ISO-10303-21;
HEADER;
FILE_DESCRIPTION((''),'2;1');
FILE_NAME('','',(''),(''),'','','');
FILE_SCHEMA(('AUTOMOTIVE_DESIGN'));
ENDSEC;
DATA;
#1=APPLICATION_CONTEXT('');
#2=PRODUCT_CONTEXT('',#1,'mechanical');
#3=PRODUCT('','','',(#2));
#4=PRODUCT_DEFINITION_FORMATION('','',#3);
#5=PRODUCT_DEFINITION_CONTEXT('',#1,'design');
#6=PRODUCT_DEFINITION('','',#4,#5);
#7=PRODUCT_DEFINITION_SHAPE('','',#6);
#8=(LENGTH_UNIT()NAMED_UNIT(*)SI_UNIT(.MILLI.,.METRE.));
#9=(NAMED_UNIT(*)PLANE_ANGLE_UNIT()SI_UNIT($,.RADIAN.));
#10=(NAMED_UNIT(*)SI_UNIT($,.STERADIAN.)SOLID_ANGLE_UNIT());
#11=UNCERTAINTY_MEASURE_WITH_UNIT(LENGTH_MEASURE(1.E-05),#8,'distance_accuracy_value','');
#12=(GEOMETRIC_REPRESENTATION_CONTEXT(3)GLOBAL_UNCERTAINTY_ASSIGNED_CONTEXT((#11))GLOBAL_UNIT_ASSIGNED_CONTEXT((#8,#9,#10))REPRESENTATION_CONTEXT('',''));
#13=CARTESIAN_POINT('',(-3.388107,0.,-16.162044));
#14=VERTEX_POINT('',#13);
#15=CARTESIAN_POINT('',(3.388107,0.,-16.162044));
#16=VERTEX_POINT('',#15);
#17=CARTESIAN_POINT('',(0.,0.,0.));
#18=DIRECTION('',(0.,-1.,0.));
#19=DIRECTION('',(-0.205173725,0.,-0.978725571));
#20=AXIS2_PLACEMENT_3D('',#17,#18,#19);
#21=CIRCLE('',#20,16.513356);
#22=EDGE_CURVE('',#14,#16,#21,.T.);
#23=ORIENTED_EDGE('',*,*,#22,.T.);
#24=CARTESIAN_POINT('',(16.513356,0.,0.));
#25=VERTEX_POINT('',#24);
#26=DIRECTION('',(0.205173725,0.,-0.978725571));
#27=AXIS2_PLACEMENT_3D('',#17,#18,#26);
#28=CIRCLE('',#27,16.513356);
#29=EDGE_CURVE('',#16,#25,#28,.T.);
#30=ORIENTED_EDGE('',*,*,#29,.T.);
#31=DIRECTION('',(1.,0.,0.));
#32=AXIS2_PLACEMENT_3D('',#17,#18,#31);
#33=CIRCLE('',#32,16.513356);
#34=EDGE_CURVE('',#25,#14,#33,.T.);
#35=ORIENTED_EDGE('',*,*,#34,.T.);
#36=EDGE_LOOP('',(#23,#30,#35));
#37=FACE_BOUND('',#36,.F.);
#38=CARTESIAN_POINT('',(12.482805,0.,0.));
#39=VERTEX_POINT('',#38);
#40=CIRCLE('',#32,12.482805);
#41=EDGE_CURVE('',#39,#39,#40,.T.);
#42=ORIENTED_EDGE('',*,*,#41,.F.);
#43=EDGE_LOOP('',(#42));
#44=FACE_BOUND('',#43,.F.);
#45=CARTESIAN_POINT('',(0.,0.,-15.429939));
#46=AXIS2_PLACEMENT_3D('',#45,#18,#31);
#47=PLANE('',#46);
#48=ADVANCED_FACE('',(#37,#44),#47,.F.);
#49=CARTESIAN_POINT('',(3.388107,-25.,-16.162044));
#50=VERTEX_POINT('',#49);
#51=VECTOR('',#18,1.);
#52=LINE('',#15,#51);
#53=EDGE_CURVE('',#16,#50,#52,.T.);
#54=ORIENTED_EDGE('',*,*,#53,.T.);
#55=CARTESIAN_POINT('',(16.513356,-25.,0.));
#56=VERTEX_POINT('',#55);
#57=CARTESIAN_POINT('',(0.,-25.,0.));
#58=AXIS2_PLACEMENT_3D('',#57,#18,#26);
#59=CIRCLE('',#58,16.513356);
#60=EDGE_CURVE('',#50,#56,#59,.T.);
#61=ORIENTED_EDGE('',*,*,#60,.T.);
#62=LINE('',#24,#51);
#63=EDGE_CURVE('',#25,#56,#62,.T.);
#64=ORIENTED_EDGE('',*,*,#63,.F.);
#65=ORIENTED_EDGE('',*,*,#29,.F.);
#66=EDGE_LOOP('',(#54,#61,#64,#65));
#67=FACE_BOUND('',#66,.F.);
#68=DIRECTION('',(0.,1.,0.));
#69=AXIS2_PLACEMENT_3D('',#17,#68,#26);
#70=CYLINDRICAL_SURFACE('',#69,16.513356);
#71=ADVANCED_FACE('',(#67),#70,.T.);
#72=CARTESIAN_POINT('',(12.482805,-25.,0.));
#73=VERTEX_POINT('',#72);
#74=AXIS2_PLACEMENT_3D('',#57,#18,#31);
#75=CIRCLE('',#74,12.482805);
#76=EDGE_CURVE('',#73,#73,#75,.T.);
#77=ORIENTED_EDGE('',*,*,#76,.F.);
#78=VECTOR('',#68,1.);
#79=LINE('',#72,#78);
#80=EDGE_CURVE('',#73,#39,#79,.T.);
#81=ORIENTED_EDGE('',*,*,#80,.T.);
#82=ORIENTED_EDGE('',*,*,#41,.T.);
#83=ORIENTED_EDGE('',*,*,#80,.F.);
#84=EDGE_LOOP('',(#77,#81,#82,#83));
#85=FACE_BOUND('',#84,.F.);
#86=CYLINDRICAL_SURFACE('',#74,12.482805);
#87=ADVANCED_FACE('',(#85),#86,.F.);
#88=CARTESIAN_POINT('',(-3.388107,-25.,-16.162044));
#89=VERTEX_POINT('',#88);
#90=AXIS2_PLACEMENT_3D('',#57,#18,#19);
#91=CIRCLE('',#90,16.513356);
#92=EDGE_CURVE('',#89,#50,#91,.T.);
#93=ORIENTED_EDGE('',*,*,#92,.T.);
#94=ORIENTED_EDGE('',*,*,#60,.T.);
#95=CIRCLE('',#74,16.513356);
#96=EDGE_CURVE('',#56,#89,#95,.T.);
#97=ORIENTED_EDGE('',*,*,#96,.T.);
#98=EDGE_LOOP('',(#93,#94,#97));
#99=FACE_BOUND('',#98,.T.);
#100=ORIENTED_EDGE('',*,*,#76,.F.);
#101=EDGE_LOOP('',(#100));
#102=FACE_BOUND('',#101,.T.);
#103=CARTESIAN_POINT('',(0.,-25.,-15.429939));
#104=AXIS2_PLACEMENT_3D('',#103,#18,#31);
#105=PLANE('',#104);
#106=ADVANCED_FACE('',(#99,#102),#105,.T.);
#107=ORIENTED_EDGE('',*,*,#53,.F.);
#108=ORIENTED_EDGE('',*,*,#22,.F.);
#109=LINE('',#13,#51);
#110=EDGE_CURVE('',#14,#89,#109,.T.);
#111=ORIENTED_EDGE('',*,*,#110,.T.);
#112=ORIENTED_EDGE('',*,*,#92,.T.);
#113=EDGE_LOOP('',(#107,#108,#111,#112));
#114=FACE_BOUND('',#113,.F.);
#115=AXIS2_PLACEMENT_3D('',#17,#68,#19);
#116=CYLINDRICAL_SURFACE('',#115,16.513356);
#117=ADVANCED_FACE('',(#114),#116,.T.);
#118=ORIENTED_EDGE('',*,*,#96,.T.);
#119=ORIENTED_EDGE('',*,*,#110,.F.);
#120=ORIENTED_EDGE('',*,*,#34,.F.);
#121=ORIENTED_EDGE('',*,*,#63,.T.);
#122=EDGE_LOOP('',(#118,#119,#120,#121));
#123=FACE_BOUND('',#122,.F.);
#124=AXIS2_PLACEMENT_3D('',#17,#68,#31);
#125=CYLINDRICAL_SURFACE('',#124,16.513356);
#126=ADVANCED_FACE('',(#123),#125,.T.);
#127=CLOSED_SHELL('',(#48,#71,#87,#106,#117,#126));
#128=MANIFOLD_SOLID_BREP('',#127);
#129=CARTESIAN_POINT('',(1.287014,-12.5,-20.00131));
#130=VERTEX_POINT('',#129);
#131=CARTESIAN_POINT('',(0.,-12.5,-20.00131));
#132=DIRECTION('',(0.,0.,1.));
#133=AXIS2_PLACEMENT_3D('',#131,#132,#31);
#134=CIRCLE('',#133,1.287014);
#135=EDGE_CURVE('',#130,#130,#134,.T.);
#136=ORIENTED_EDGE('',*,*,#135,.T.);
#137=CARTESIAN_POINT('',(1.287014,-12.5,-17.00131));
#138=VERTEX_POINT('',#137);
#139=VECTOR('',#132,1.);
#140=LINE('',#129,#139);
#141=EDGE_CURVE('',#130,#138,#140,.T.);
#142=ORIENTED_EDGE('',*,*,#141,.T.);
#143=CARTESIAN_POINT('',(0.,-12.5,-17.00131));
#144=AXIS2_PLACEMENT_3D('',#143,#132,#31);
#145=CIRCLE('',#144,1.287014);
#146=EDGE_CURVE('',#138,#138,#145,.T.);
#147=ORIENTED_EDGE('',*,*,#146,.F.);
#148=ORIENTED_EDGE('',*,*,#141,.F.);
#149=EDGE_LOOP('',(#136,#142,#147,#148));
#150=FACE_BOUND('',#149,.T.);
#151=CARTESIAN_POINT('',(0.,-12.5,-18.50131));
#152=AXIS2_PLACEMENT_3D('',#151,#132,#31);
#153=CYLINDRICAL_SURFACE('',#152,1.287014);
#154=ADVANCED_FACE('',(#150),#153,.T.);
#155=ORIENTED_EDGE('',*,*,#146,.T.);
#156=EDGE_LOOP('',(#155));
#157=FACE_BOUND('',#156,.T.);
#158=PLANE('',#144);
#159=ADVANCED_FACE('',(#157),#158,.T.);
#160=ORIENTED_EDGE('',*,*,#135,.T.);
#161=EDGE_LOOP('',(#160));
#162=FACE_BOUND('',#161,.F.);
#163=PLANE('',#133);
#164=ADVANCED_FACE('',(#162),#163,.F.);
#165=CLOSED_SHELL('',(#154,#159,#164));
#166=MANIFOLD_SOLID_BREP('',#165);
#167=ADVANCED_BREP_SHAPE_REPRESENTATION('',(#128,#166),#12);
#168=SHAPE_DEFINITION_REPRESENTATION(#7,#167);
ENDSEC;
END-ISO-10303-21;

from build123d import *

# Parameters (mm, degrees)
F1_DEPTH = 25
F2_R     = 12.4828054131
F3_DEPTH = 30
F5_R     = 1.2870142299
F6_DEPTH = 1.5


with BuildPart() as f1:
    # F0 (on Front) → F1 (new body)
    with BuildSketch(Plane.XZ):
        with BuildLine():
            Line((-3.388106823, -14.5254029512), (-3.388106823, -16.1620440826))
            ThreePointArc((-3.388106823, -16.1620440826), (0, -16.5133563146), (3.388106823, -16.1620440826))
            Line((3.388106823, -16.1620440826), (3.388106823, -14.5254029512))
            Line((3.388106823, -14.5254029512), (-3.388106823, -14.5254029512))
        make_face()
        with BuildLine():
            ThreePointArc((3.388106823, -16.1620440826), (12.8187353505, -10.4101374048), (16.5133563146, 0))
            ThreePointArc((16.5133563146, 0), (-10.4101374048, 12.8187353505), (-3.388106823, -16.1620440826))
            Line((-3.388106823, -16.1620440826), (-3.388106823, -14.5254029512))
            Line((-3.388106823, -14.5254029512), (3.388106823, -14.5254029512))
            Line((3.388106823, -14.5254029512), (3.388106823, -16.1620440826))
        make_face()
    extrude(amount=F1_DEPTH)

    # F2 (on face) → F3 (cut)
    with BuildSketch(Plane.XZ.offset(25)):
        Circle(F2_R)
    extrude(amount=-F3_DEPTH, mode=Mode.SUBTRACT)


with BuildPart() as f6:
    # F5 (on face) → F6 (new body, symmetric)
    with BuildSketch(Plane.XY.offset(-18.501309678)):
        with Locations((0, -12.5)):
            Circle(F5_R)
    extrude(amount=F6_DEPTH, both=True)


solid = Compound([f1.part, f6.part])
